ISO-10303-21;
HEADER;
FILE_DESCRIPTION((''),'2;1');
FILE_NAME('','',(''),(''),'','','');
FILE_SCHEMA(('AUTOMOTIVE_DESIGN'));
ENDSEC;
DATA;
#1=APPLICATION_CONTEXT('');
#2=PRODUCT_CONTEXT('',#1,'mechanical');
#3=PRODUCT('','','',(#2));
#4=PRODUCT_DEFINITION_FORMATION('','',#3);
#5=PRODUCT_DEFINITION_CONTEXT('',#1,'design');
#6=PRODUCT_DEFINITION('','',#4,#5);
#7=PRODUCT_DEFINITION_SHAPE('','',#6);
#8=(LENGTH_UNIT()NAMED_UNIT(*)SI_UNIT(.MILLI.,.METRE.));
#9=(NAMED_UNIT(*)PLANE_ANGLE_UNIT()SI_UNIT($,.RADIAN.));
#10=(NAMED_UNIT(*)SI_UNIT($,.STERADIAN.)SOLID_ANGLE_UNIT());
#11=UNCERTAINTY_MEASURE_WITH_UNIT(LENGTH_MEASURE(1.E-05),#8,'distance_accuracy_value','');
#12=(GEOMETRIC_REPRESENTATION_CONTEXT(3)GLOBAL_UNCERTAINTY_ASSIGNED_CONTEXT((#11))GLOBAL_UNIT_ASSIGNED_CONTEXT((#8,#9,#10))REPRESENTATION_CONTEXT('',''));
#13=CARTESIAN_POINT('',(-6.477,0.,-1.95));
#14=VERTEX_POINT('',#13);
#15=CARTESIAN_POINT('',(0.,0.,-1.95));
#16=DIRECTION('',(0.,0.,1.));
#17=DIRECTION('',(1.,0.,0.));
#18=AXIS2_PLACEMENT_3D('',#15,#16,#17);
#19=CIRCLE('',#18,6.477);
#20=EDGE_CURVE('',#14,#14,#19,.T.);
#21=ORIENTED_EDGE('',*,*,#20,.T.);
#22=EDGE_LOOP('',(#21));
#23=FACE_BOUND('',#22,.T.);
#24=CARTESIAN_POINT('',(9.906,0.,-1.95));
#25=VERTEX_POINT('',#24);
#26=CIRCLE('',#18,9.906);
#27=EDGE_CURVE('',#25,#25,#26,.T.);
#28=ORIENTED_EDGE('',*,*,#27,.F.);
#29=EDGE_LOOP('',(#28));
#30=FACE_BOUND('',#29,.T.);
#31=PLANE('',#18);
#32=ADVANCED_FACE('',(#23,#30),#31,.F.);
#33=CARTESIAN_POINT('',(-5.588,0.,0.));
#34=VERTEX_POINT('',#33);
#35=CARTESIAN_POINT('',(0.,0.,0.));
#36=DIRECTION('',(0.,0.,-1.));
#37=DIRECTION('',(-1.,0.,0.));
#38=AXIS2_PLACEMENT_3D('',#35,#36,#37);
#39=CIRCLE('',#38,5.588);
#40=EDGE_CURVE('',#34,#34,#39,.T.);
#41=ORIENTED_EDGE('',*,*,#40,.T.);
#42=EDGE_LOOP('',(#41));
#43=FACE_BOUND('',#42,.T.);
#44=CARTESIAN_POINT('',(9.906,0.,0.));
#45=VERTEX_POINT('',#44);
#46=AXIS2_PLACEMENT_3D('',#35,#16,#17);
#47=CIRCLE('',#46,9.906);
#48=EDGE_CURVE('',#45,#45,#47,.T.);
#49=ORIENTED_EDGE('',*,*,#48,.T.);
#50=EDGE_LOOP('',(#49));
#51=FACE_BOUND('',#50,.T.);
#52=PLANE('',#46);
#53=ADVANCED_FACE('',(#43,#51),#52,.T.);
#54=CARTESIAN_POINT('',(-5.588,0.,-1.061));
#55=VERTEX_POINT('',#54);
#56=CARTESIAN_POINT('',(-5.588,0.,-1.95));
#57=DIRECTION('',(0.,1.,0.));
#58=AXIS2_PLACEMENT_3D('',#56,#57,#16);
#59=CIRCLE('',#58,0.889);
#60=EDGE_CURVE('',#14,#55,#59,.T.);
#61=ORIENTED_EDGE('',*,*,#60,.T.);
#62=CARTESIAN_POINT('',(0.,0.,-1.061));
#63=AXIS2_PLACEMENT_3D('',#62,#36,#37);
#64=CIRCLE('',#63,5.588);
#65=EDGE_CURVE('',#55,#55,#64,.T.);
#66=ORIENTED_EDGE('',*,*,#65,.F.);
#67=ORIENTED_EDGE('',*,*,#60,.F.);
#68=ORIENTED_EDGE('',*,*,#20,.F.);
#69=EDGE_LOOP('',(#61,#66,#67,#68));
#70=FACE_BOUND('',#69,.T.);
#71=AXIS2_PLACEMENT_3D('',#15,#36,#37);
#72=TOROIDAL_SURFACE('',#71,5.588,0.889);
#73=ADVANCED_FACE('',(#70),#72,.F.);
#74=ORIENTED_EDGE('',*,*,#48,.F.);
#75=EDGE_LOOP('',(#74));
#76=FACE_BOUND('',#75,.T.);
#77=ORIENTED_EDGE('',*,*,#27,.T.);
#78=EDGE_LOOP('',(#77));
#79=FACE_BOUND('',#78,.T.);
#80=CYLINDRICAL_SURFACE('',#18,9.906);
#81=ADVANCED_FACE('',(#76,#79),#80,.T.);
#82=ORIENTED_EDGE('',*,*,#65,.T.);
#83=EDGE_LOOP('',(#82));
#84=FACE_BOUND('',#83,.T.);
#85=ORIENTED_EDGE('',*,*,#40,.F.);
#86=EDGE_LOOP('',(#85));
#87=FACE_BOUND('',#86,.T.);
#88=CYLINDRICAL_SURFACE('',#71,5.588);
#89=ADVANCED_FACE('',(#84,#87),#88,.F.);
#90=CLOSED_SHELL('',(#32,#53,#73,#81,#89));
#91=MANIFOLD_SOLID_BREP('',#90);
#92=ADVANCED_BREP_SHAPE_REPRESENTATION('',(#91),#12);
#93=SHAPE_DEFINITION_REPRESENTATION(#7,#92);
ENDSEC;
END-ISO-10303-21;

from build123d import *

# Parameters (mm, degrees)
SKETCH1_R                  = 9.906
BOSS_EXTRUDE1_DEPTH        = 1.95
F_97_0_44_DIAMETER_HOLE1_D = 11.176


# Read off the part's stored shape, not the designer's step: Cut-Sweep1
with BuildPart() as part:
    # Sketch1 → Boss-Extrude1 (new body)
    with BuildSketch(Plane.XY):
        Circle(SKETCH1_R)
    extrude(amount=-BOSS_EXTRUDE1_DEPTH)

    # #97 (0.44) Diameter Hole1 (through all)
    with Locations(Plane(origin=(0, 0, -1.95), x_dir=(-1, 0, 0), z_dir=(0, 0, -1))):
        with Locations((0, 0)):
            Hole(F_97_0_44_DIAMETER_HOLE1_D / 2)

    # Cut-Sweep1 outline → Cut-Sweep1 (revolve, cut)
    with BuildSketch(Plane.XZ):
        with BuildLine():
            ThreePointArc((6.477, -1.95), (6.216617928, -1.321382072), (5.588, -1.061))
            Line((5.588, -1.061), (5.588, -1.95))
            Line((5.588, -1.95), (6.477, -1.95))
        make_face()
    revolve(axis=Axis((0, 0, 0), (0, 0, 1)), mode=Mode.SUBTRACT)


solid = part.part
